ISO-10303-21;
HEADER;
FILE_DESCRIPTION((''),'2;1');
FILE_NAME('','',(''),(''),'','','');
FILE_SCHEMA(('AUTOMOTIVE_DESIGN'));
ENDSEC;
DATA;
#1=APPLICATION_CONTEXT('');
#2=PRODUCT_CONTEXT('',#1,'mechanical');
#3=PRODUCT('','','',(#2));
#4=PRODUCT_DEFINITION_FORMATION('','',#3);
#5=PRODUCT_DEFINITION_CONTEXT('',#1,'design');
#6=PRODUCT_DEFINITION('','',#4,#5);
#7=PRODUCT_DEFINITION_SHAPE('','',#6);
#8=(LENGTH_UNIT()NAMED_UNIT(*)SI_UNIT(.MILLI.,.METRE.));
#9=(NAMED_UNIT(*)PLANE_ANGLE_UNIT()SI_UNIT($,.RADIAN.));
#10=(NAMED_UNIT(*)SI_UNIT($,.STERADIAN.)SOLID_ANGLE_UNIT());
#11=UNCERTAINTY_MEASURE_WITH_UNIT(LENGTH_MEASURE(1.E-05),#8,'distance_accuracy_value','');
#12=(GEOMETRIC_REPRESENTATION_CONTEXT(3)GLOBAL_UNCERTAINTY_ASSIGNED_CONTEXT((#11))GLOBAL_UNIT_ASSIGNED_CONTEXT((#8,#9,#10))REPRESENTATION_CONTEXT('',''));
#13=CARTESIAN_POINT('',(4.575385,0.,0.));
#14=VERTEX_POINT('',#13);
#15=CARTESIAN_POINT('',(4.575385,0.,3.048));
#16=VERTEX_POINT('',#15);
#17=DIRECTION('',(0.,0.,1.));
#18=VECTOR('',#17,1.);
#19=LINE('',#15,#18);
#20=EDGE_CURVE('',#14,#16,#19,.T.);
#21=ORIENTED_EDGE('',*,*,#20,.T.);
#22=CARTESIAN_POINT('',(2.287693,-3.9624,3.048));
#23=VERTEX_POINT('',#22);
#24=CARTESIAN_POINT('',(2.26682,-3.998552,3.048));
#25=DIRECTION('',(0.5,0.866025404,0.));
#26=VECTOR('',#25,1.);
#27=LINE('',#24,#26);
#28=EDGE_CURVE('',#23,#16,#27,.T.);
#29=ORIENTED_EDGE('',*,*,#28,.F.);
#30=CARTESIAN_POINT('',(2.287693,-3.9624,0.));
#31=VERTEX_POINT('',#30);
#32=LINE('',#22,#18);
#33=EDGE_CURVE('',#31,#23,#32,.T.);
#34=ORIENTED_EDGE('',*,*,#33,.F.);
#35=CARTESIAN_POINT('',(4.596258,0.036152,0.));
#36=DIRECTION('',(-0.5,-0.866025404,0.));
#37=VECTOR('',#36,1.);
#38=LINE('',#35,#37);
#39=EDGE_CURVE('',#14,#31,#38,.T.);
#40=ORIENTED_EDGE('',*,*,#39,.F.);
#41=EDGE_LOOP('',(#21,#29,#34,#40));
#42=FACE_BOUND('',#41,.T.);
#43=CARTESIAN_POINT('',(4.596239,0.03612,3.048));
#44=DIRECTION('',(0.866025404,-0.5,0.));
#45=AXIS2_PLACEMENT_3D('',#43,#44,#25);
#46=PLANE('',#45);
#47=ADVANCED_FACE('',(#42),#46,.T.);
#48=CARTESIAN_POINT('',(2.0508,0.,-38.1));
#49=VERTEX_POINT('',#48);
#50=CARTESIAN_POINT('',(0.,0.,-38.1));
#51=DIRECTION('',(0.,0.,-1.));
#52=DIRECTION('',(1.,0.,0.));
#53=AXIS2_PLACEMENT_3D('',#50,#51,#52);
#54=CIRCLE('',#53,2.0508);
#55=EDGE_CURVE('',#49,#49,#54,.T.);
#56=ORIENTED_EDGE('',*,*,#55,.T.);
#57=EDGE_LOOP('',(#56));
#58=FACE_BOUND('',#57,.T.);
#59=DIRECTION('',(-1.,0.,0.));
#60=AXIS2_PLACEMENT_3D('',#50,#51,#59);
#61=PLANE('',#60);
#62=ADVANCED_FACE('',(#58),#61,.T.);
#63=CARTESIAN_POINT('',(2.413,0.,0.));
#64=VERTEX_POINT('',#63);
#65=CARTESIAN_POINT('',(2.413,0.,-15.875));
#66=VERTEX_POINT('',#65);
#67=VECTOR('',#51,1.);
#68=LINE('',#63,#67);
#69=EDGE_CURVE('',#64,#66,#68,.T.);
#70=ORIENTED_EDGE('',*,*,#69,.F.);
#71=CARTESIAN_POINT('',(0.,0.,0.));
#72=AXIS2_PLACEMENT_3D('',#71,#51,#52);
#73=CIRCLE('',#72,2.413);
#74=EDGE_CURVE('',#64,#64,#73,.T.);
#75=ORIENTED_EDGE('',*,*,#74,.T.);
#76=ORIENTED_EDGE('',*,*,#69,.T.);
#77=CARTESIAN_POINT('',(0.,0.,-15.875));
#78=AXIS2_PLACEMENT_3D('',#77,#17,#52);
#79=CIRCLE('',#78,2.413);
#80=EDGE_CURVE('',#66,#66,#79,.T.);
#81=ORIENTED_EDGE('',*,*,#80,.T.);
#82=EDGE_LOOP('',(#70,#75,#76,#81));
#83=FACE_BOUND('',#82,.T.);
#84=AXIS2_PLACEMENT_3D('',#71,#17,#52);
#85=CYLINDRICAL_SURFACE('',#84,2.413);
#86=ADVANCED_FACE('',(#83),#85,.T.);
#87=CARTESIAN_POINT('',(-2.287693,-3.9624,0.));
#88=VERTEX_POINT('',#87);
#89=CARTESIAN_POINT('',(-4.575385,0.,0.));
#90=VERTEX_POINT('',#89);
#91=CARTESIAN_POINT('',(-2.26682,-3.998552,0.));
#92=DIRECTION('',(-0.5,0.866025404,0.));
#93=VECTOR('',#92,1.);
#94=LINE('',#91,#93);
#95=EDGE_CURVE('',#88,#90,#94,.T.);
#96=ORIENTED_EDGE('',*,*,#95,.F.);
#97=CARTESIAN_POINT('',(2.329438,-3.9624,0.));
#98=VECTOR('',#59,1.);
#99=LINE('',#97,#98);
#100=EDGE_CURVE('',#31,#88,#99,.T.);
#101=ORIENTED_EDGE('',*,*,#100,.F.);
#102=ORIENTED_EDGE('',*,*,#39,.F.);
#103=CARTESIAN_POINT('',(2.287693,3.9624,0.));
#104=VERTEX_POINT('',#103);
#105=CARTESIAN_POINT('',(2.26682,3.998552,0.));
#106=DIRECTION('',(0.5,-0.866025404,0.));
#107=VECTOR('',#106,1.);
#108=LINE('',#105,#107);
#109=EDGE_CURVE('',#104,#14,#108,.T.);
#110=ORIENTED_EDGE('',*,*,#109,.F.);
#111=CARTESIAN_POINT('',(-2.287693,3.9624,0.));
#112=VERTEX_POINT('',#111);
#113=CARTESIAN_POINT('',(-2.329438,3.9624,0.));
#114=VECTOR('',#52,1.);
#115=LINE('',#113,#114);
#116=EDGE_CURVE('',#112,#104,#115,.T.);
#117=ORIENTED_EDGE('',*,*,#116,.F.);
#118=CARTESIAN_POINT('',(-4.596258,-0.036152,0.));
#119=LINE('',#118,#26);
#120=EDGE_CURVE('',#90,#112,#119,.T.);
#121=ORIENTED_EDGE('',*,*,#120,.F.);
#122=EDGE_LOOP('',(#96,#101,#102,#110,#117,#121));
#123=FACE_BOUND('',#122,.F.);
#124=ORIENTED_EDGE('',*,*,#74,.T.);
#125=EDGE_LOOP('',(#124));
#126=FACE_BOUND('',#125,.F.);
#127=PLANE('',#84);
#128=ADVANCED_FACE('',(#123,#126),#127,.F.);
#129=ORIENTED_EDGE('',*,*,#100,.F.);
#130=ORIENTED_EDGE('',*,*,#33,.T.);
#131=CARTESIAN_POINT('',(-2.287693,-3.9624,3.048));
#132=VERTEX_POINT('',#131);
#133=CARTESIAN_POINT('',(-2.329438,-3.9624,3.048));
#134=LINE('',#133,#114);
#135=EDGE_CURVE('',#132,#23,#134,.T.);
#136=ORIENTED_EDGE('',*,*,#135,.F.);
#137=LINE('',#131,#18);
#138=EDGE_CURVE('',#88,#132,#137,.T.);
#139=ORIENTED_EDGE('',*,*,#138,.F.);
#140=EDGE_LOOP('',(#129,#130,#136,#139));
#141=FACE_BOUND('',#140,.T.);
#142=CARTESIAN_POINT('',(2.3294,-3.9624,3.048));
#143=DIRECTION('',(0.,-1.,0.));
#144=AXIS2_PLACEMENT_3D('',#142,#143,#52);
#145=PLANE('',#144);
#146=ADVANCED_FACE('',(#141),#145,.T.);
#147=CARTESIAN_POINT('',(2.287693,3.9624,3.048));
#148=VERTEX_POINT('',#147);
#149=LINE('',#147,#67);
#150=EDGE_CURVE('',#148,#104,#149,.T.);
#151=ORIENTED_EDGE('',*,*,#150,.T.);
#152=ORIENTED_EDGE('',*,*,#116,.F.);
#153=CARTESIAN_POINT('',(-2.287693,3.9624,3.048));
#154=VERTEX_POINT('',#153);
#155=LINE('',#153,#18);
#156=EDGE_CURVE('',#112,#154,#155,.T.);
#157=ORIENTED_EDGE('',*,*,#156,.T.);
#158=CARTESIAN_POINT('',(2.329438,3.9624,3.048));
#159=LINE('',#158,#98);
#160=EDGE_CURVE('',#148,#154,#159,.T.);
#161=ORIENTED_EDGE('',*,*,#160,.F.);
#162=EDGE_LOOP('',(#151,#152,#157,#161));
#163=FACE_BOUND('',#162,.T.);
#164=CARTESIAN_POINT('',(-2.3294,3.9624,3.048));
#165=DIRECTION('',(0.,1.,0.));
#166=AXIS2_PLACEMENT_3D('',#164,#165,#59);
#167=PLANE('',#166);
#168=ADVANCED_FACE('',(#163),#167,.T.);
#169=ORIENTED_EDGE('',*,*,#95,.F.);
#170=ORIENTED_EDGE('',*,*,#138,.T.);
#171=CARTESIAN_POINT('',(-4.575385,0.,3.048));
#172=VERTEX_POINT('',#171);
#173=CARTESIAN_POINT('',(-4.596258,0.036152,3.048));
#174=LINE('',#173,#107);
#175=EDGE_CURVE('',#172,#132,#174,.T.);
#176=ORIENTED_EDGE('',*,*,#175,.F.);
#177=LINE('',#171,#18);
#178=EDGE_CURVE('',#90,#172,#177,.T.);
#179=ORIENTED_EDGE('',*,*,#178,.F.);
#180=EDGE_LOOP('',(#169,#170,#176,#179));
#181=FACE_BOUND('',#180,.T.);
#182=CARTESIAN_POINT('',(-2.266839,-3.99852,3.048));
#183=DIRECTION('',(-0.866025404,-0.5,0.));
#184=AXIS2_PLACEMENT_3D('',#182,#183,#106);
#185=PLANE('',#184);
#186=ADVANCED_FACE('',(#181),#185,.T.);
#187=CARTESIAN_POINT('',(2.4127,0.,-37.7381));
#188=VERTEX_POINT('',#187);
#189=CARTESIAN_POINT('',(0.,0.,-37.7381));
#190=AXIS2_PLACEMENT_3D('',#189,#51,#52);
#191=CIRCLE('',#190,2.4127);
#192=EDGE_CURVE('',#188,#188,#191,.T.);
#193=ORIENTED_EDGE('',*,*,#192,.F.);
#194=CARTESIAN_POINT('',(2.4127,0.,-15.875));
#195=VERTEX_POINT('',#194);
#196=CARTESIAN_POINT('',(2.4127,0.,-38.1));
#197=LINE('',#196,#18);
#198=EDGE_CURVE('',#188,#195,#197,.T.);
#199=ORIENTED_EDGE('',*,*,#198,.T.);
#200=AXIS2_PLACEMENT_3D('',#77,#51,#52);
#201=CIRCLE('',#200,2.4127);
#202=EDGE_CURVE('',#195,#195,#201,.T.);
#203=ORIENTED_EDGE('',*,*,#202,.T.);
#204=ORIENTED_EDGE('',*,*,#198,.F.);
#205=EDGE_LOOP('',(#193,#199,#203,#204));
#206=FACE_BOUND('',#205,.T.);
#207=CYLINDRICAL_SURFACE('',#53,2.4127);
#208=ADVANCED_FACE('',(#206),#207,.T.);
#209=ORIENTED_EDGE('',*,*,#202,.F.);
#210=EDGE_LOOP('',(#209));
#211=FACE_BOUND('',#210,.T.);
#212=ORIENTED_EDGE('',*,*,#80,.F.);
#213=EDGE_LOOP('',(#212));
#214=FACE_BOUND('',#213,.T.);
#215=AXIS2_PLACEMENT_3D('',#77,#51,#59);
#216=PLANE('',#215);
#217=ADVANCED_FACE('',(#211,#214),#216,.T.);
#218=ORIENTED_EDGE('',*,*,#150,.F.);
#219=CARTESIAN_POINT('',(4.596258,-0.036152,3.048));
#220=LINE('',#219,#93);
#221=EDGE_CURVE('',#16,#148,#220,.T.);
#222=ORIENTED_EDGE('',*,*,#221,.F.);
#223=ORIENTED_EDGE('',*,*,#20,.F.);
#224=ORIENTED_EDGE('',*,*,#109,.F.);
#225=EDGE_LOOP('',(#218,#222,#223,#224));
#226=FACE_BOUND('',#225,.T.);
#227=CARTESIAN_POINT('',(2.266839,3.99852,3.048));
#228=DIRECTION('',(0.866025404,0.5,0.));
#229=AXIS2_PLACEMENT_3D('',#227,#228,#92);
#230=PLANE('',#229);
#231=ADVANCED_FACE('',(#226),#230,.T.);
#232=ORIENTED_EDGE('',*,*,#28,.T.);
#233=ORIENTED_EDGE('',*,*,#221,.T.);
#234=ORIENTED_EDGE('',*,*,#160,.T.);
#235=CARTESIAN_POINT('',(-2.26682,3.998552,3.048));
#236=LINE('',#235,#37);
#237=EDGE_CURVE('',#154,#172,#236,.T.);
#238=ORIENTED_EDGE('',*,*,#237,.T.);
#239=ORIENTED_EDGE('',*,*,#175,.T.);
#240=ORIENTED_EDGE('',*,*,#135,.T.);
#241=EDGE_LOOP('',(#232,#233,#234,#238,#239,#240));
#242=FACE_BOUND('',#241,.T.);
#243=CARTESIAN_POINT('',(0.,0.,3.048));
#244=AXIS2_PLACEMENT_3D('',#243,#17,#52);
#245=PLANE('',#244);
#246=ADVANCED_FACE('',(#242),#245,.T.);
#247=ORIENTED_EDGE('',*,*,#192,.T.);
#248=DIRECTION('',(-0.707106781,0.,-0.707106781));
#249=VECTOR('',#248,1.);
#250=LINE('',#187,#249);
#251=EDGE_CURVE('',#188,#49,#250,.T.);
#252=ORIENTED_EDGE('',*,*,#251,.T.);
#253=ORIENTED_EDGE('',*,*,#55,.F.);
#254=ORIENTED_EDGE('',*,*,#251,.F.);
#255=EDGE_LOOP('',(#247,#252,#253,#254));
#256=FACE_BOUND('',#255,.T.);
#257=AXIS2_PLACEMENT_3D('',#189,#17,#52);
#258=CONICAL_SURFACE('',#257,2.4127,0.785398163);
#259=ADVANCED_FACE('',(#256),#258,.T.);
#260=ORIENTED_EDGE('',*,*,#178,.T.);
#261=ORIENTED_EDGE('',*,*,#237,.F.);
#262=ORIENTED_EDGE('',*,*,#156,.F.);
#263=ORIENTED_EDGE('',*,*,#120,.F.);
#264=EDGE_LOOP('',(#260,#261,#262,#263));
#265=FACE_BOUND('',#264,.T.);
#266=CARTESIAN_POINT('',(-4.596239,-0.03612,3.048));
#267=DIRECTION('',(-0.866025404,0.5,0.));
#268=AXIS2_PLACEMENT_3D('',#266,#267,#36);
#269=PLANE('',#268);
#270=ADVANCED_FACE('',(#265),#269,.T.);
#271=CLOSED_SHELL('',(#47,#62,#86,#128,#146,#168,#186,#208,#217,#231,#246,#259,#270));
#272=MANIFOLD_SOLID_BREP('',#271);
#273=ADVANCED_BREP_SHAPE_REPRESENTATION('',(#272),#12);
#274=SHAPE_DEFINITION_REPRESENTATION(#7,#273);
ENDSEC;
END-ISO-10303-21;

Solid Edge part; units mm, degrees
sketch "Sketch1" plane through (0, 0, 0) normal (0, 0, 1) x (1, 0, 0)
  circle A0 centre (0, 0) radius 4.5964
  dimension "D1" = 9.1928
extrude "Protrusion1" add sketch "Sketch1" along normal blind 3.048
sketch "Sketch2" plane through (0, 0, 0) normal (0, 0, -1) x (1, 0, 0)
  circle A0 centre (0, 0) radius 2.413
extrude "Protrusion2" add sketch "Sketch2" along normal blind 38.1
sketch "Sketch3" plane through (0, 0, -38.1) normal (0, 0, -1) x (1, 0, 0)
  circle A0 centre (0, 0) radius 2.4127
extrude "Cutout1" cut sketch "Sketch3" against normal blind 22.225 flip side to cut
chamfer "Chamfer_1" distance 0.3619 angle 45 1 edges at (-2.4127, 0, -38.1)
sketch "Sketch4" plane through (0, 0, 3.048) normal (0, 0, 1) x (1, 0, 0)
  line L0 (-2.3294, 3.9624) -> (2.3294, 3.9624)
  dimension "D1" = 7.9248
extrude "Cutout2" cut sketch "Sketch4" against normal up to next material side at (0, 4.0124, 3.048)
pattern_circular "Pattern1" count 6 over 360 about axis through (0, 0, 3.048) along (0, 0, 1) of "Cutout2"
properties part number "119801"
